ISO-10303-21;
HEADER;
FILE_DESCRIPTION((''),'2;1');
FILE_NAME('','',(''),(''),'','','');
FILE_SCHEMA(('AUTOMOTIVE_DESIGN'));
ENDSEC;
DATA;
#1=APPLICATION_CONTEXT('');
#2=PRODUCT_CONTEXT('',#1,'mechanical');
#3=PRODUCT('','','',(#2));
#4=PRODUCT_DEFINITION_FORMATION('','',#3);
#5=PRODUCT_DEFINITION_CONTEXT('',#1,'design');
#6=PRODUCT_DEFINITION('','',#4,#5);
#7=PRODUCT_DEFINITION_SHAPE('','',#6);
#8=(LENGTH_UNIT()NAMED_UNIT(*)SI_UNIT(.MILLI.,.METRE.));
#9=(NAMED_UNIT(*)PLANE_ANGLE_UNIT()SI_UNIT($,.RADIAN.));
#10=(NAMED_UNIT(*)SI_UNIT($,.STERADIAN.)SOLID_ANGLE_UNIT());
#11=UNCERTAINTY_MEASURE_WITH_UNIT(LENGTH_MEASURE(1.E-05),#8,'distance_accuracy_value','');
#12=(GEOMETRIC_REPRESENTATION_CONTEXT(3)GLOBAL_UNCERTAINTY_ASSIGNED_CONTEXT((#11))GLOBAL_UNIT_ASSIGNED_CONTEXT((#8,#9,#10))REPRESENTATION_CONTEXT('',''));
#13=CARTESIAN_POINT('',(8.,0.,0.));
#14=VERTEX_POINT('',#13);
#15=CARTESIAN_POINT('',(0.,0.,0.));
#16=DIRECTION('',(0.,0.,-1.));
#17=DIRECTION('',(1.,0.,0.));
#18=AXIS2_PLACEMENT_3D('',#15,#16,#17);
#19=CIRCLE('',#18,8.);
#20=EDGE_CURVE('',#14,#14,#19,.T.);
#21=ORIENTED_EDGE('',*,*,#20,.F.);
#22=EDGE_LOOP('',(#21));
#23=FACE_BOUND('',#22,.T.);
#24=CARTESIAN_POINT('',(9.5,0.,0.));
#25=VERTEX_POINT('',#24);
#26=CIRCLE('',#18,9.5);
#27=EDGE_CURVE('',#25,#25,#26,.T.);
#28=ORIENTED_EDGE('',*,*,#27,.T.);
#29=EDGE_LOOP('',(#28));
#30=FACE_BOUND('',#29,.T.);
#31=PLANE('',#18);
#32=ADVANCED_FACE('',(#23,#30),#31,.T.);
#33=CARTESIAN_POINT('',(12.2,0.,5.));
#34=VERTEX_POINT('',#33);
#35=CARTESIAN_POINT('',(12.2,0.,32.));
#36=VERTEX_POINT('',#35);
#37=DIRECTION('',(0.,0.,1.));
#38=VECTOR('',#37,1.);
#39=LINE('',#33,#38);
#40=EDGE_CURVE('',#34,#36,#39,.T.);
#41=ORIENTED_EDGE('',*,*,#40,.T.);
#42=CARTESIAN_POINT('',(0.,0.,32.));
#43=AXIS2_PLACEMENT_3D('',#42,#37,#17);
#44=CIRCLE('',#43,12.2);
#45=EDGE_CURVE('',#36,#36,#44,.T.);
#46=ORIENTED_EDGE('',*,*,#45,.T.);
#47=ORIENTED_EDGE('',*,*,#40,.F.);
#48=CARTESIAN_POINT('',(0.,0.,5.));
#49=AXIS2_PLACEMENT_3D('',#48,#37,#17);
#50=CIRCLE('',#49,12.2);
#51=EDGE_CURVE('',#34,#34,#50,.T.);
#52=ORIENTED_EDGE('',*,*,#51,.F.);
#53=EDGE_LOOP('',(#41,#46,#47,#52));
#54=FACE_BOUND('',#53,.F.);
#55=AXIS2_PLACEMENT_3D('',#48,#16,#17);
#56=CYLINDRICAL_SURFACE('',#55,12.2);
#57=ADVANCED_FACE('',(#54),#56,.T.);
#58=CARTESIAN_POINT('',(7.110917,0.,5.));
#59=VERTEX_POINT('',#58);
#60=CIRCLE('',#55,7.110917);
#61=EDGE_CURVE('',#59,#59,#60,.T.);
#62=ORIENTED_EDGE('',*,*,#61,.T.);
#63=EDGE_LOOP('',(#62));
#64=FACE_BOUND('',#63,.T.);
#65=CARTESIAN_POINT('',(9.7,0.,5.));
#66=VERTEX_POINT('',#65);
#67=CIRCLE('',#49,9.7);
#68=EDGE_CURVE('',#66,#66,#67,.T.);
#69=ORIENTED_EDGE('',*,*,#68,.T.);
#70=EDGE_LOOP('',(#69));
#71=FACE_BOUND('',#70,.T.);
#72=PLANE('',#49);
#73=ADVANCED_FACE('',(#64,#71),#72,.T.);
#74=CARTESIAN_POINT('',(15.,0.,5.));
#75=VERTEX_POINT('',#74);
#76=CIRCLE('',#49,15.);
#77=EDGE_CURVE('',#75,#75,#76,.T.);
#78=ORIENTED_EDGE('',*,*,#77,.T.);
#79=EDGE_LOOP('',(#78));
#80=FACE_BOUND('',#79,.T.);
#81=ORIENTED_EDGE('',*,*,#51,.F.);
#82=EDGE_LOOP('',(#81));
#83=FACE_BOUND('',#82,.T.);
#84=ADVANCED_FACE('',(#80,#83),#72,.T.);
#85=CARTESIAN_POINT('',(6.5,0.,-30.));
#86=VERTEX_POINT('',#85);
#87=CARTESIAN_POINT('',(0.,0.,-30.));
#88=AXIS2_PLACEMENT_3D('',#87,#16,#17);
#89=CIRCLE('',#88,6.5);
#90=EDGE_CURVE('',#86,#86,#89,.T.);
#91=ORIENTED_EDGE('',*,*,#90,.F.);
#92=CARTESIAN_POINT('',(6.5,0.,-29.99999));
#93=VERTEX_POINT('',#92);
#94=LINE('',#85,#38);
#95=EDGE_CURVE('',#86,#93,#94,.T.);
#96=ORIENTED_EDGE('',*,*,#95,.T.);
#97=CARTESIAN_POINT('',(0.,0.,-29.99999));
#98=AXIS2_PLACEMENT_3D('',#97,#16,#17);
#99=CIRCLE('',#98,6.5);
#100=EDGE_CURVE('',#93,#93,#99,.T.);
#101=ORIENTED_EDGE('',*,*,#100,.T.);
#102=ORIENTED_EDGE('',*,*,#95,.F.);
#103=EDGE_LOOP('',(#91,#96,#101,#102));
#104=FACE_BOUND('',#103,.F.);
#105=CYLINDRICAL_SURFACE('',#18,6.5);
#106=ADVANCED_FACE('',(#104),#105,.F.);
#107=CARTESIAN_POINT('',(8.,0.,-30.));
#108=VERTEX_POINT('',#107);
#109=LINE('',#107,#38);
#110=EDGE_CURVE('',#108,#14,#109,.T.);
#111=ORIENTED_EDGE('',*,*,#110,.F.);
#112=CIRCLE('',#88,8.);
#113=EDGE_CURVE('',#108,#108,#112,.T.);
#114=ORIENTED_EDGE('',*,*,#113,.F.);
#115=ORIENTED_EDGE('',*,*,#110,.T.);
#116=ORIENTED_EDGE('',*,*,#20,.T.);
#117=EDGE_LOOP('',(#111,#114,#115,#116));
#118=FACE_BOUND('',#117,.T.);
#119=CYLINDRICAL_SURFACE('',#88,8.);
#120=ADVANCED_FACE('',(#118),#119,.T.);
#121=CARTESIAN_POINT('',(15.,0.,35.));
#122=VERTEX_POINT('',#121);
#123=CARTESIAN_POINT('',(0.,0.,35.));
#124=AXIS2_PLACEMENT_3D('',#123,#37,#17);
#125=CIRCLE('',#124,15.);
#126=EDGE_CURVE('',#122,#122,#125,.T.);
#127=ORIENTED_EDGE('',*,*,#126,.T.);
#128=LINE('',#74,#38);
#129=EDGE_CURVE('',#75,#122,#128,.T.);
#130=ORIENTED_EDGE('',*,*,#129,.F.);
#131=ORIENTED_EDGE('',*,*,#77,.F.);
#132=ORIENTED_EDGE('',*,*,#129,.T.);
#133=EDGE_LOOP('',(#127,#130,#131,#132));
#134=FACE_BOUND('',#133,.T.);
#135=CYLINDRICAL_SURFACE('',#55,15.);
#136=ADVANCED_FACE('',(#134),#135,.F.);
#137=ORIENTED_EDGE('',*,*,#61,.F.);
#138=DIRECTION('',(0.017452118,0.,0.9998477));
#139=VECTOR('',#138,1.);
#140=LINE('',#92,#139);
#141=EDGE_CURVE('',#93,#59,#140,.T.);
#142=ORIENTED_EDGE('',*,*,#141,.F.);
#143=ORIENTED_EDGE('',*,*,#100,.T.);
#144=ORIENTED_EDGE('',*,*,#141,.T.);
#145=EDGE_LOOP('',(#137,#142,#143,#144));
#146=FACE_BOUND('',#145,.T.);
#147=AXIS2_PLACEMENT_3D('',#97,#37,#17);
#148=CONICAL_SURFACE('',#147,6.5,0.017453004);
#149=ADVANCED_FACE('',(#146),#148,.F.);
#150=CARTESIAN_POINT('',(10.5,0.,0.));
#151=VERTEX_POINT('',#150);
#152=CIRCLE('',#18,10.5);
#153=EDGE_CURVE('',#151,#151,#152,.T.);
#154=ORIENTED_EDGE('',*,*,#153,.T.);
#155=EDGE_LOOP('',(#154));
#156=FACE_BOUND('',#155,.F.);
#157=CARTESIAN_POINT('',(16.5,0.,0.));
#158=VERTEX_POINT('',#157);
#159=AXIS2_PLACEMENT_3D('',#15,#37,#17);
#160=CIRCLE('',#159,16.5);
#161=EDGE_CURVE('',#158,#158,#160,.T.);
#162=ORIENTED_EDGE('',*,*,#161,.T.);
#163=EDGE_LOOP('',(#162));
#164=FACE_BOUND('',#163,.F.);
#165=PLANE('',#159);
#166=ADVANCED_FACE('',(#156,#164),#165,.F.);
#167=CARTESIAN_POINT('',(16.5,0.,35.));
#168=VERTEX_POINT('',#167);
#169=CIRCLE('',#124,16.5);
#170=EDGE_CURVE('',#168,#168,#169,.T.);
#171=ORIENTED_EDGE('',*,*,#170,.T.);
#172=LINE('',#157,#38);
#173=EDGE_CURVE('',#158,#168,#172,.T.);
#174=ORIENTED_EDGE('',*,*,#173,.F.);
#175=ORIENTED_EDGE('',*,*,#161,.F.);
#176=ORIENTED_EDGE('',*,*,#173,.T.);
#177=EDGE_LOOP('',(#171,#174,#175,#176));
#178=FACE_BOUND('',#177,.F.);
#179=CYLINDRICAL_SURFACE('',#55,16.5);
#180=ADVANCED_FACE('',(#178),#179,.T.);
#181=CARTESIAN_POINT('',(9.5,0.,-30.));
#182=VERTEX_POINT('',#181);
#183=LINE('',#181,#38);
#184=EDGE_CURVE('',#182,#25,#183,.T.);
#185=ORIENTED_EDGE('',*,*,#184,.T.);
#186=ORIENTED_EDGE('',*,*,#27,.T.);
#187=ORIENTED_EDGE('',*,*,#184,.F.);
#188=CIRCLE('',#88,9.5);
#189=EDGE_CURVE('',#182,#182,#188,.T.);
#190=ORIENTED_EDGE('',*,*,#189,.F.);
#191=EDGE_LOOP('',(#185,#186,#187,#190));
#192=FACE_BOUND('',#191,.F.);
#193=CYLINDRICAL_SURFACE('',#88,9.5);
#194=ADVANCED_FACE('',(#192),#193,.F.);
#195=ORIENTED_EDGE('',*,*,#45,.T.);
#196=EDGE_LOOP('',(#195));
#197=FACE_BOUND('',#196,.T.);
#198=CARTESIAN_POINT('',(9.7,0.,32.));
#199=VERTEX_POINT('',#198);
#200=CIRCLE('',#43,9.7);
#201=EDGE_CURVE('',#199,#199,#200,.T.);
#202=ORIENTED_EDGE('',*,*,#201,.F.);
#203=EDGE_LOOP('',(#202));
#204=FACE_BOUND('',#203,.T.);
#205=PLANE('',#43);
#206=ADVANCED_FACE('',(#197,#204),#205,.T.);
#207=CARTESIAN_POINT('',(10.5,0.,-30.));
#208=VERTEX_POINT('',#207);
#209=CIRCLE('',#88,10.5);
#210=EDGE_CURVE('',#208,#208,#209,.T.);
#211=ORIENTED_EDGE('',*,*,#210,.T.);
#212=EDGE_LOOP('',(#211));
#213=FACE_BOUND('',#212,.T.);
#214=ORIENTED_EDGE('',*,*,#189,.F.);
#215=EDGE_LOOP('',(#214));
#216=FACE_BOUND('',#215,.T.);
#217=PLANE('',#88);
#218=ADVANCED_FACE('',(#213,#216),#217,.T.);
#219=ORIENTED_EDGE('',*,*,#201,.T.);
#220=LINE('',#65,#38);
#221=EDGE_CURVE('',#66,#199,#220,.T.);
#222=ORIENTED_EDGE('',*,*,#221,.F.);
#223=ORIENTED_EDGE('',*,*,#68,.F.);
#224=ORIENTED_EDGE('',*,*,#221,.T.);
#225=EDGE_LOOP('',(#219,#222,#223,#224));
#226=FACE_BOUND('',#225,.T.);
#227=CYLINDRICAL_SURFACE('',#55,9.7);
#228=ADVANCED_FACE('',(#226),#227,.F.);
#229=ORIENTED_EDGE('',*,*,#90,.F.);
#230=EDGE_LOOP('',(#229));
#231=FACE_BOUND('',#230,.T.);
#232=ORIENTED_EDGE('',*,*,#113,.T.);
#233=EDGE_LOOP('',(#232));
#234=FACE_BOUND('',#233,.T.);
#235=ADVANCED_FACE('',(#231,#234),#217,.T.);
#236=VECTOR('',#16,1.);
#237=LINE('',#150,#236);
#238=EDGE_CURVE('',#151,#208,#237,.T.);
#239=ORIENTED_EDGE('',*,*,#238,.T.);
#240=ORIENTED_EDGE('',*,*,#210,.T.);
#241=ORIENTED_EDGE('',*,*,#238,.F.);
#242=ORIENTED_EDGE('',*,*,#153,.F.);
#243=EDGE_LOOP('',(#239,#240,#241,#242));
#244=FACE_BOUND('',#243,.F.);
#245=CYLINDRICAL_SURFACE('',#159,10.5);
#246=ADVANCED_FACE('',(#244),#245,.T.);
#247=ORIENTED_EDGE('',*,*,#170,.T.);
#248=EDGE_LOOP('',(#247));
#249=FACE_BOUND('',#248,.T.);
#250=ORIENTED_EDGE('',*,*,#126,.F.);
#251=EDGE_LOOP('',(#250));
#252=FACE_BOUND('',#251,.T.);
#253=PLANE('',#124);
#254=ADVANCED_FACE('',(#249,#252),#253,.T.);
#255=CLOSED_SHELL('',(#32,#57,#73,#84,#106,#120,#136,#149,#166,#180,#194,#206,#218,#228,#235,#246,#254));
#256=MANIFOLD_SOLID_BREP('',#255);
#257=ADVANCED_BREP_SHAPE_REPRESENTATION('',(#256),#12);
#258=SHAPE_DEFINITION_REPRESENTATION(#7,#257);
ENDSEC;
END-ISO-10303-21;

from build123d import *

# Parameters (mm, degrees)
F0_R      = 16.5
F1_DEPTH  = 5
F2_R      = 16.5
F2_R_2    = 15
F3_DEPTH  = 30
F4_R      = 12.2
F4_R_2    = 9.7
F5_DEPTH  = 27
F6_R      = 10.5
F7_DEPTH  = 30
F8_R      = 9.5
F8_R_2    = 8
F8_R_3    = 6.5
F9_DEPTH  = 30
F10_DEPTH = 30
F11_SIZE2 = 0.610917
F11_SIZE  = 34.99999


# Not quite as in the source:
# - a fillet or chamfer is up to 0.001 mm smaller than in the source, because OpenCascade refuses the exact size


with BuildPart() as f1:
    # F0 (on Top) → F1 (new body)
    with BuildSketch(Plane.XY):
        Circle(F0_R)
    extrude(amount=F1_DEPTH)

    # F2 (on face) → F3 (join)
    with BuildSketch(Plane.XY.offset(5)):
        Circle(F2_R)
        Circle(F2_R_2, mode=Mode.SUBTRACT)
    extrude(amount=F3_DEPTH)

    # F4 (on face) → F5 (join)
    with BuildSketch(Plane.XY.offset(5)):
        Circle(F4_R)
        Circle(F4_R_2, mode=Mode.SUBTRACT)
    extrude(amount=F5_DEPTH)

    # F6 (on face) → F7 (join)
    with BuildSketch(Plane(origin=(0, 0, 0), x_dir=(1, 0, 0), z_dir=(0, 0, -1))):
        Circle(F6_R)
    extrude(amount=F7_DEPTH)

    # F8 (on face) → F9 (cut)
    with BuildSketch(Plane(origin=(0, 0, -30), x_dir=(1, 0, 0), z_dir=(0, 0, -1))):
        Circle(F8_R)
        Circle(F8_R_2, mode=Mode.SUBTRACT)
        Circle(F8_R_3)
    extrude(amount=-F9_DEPTH, mode=Mode.SUBTRACT)

    # F10 (cut): a face of the model
    f10_faces = [f1.faces().sort_by_distance(p)[0] for p in [
        (0, 0, 0),
    ]]
    extrude(f10_faces, amount=-F10_DEPTH, mode=Mode.SUBTRACT)

    # F11 (size 35 and 0.6109272725 in the source; OpenCascade refuses exactly that, so slightly less here)
    f11_edges = [f1.edges().sort_by_distance(p)[0] for p in [
        (-6.5, 0, 5),
    ]]
    f11_side = f1.faces().sort_by_distance((-6.5, 0, -12.5))[0]
    chamfer(f11_edges, length=F11_SIZE, length2=F11_SIZE2, reference=f11_side)


solid = f1.part
